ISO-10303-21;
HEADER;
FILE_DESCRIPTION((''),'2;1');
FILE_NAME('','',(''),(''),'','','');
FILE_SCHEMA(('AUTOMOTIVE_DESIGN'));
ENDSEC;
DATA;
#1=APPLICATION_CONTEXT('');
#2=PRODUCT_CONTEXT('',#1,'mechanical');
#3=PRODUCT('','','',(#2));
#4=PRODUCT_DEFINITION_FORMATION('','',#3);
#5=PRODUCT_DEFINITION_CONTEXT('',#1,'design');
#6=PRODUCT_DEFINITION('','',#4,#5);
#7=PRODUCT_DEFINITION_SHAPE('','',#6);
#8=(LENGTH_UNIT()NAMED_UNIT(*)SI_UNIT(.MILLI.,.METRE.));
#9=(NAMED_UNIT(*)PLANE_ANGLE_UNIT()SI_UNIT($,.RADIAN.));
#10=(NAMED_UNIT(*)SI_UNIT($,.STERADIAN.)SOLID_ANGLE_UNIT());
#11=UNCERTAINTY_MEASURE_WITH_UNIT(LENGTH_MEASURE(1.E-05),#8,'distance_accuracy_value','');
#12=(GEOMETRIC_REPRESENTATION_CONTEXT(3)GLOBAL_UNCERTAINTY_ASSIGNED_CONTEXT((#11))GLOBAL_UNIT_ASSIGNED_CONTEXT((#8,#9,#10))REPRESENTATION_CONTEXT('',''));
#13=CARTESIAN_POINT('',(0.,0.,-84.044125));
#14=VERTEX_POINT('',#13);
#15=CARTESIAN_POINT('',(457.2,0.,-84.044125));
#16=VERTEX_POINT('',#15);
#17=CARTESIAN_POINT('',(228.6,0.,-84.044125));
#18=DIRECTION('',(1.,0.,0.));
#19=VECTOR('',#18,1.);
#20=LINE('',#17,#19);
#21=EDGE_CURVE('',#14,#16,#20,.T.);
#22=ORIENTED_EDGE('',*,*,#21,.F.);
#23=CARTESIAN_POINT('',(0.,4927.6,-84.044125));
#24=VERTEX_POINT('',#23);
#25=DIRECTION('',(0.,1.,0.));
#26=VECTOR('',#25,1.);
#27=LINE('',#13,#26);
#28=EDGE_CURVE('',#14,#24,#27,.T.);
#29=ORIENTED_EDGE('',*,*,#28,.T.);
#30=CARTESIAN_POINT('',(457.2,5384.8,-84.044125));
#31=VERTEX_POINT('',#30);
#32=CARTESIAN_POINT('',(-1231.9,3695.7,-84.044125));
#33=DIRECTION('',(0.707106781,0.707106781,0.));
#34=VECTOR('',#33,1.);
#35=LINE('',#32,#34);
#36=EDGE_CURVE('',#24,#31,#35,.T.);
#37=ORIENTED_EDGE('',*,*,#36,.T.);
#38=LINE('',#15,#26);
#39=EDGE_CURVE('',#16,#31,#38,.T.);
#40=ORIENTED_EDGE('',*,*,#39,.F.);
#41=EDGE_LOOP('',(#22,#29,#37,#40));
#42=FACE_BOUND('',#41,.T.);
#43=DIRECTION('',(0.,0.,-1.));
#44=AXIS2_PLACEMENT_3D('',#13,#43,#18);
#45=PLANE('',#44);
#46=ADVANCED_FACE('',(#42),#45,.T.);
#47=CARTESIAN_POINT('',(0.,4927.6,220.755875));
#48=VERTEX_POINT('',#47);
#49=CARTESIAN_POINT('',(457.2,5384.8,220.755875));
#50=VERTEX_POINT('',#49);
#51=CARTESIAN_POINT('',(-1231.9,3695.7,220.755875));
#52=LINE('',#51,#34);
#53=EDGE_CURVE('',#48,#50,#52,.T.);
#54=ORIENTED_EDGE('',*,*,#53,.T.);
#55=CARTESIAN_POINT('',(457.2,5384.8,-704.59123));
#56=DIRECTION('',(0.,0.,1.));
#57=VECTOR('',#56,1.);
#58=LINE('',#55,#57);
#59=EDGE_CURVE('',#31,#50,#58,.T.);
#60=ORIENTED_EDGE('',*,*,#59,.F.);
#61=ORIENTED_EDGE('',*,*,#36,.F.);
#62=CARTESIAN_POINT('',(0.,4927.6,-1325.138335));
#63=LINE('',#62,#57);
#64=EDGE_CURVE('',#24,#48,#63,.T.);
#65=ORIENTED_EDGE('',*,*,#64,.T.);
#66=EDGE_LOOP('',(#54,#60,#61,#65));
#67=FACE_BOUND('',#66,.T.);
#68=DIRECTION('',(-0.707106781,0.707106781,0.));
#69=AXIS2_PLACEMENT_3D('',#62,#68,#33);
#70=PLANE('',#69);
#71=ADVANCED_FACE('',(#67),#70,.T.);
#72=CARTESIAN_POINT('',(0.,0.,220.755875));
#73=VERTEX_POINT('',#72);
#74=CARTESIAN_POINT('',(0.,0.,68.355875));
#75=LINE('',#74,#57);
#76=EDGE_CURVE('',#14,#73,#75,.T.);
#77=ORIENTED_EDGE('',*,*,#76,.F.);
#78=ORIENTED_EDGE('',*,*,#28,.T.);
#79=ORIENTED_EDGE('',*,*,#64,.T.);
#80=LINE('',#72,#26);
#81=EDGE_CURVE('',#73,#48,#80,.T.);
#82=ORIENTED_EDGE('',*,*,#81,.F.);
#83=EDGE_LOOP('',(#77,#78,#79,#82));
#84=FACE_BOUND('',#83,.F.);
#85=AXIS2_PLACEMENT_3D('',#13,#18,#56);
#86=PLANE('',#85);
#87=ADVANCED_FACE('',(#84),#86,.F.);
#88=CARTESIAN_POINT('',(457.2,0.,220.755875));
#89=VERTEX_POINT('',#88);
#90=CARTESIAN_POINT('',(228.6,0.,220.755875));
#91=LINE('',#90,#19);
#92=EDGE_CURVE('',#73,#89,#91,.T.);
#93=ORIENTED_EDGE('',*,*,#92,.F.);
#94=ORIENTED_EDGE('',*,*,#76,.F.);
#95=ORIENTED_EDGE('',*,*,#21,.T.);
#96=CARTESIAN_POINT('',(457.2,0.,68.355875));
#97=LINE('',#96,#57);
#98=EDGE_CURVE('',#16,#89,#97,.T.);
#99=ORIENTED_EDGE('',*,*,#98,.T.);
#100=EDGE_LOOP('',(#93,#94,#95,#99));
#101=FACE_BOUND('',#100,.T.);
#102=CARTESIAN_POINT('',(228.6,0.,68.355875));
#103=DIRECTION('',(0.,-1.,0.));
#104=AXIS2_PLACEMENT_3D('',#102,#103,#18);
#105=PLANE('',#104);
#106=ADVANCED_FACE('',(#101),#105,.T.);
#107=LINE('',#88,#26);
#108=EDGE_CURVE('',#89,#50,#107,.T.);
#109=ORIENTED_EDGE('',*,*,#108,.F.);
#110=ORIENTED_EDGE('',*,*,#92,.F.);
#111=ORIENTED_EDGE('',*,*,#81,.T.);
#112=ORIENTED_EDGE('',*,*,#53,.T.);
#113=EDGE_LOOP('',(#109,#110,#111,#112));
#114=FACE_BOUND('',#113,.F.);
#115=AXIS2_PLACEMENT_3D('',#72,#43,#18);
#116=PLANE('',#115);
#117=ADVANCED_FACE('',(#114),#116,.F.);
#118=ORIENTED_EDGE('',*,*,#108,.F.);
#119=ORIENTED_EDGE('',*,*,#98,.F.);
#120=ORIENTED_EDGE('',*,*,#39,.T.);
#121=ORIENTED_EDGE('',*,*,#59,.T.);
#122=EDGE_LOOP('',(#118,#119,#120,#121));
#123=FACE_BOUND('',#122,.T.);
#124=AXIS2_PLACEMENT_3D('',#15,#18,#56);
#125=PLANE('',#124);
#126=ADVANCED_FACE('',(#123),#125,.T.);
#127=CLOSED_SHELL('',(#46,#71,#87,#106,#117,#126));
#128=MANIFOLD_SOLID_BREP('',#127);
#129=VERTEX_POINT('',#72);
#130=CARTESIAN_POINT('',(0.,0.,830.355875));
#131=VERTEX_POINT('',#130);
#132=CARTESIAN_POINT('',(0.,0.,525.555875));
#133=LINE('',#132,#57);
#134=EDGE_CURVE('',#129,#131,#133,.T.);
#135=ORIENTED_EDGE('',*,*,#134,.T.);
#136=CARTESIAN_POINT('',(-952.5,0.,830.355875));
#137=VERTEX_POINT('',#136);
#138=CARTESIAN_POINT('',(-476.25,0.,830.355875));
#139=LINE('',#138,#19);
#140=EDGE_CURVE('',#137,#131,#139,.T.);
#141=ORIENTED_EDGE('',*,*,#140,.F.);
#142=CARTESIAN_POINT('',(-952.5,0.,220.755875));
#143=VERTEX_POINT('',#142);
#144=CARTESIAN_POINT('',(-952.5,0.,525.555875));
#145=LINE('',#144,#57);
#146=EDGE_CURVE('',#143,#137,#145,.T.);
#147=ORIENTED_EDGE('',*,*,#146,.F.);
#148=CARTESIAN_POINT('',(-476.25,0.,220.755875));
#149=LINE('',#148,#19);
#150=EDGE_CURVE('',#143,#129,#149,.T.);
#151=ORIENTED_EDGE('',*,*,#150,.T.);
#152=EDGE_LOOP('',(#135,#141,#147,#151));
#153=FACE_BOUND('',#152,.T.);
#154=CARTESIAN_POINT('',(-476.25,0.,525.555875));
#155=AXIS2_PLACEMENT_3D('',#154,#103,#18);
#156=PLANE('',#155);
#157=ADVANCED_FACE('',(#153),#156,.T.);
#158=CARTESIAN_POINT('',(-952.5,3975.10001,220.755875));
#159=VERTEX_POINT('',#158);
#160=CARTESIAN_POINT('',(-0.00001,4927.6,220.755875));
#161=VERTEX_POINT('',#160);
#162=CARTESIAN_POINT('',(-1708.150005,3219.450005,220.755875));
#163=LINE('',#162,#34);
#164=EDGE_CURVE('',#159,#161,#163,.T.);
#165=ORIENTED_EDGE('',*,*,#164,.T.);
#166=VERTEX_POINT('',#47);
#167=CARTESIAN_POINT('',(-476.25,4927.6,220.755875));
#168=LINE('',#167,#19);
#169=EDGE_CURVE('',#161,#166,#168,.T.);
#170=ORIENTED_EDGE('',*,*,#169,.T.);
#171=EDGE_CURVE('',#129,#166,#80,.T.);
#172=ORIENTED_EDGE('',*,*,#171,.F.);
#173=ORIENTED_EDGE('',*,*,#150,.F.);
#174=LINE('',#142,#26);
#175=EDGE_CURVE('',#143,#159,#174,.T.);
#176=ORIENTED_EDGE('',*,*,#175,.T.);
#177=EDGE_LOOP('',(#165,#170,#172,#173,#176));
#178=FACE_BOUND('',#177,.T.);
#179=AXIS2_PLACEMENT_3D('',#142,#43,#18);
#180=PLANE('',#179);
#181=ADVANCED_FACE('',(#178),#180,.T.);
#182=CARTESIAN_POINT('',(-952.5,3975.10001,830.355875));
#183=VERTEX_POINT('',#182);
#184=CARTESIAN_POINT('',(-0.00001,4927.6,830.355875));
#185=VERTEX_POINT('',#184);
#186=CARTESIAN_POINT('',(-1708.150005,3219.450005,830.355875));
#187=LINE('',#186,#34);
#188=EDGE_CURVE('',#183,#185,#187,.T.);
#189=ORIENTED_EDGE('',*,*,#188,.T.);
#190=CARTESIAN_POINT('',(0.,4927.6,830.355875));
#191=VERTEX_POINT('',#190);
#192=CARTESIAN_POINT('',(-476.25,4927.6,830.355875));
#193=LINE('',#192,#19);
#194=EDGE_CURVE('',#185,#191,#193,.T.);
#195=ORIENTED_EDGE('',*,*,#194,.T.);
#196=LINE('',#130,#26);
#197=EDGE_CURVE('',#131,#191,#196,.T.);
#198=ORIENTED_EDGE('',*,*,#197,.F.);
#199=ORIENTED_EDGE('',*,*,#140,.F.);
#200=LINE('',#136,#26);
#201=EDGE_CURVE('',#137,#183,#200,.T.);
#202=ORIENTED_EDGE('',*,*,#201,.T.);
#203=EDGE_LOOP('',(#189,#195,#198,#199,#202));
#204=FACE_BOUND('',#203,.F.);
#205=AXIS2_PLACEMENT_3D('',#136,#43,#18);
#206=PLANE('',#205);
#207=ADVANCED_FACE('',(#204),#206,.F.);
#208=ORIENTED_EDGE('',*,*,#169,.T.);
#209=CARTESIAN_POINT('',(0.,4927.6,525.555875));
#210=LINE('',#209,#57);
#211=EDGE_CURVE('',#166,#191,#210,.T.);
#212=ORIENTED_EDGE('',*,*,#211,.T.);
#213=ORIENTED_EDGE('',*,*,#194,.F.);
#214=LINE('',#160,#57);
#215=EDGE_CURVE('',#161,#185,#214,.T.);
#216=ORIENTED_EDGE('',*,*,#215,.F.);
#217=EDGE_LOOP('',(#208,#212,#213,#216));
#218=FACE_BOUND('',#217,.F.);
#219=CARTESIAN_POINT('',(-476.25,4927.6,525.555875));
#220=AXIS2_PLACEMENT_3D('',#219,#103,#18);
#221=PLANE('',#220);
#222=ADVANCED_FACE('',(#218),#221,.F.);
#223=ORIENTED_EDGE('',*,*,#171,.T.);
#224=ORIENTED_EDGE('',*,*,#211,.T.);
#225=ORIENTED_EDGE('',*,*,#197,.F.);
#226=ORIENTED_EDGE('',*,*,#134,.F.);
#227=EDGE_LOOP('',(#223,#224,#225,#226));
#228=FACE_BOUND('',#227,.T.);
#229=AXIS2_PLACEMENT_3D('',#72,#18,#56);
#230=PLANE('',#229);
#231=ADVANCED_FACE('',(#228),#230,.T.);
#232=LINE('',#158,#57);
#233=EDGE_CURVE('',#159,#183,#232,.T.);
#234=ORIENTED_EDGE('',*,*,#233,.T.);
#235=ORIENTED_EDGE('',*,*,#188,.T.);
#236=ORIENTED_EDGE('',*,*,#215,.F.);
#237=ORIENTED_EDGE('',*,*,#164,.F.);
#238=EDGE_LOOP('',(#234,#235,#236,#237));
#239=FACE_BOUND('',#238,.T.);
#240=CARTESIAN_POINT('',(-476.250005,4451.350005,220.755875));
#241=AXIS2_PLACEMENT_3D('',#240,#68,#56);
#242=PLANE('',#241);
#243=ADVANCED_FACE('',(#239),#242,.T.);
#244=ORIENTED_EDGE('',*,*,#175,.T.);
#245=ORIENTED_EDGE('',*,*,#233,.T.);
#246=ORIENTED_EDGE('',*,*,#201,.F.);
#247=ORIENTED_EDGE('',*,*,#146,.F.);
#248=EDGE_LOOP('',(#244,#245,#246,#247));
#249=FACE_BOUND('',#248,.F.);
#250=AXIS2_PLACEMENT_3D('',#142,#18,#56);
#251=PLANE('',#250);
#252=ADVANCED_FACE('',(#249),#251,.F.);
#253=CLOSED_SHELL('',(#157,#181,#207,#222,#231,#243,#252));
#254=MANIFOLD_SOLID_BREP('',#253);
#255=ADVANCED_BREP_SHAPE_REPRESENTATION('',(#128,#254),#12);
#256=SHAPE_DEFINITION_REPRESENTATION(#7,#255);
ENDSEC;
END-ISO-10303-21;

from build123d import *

# Parameters (mm, degrees)
F0_W        = 457.2
F0_H        = 304.8
F2_DEPTH    = 5410.2
F1_W        = 952.5
F1_H        = 609.6
F3_DEPTH    = 4927.6
F4_T1_DEPTH = 2786.9884199847
F5_SIZE     = 952.49999


# Not quite as in the source:
# - a fillet or chamfer that OpenCascade refuses, or shapes differently, is made with other operations: its cross-section is extruded or revolved along the edge and cut away or added
# - a fillet or chamfer is up to 0.001 mm smaller than in the source, because OpenCascade refuses the exact size


with BuildPart() as f2:
    # F0 (on Front) → F2 (new body)
    with BuildSketch(Plane.XZ):
        with Locations((228.6, 68.3558752648)):
            Rectangle(F0_W, F0_H)
    extrude(amount=-F2_DEPTH)

    # F4: chamfer of 482.6 on 1 edges, made by hand

    # F4_s2 → F4_t1 (cut)
    with BuildSketch(Plane.XY.offset(-1325.1383347275)):
        Polygon((0, 4927.6), (482.6, 5410.2), (0, 5410.2), align=None)
    extrude(amount=F4_T1_DEPTH, mode=Mode.SUBTRACT)


with BuildPart() as f3:
    # F1 (on face) → F3 (new body)
    with BuildSketch(Plane.XZ):
        with Locations((-476.25, 525.5558752648)):
            Rectangle(F1_W, F1_H)
    extrude(amount=-F3_DEPTH)

    # F5 (size 952.5 in the source; OpenCascade refuses exactly that, so slightly less here)
    f5_edges = [f3.edges().sort_by_distance(p)[0] for p in [
        (-952.5, 4927.6, 525.555875),
    ]]
    chamfer(f5_edges, length=F5_SIZE)


solid = Compound([f2.part, f3.part])
